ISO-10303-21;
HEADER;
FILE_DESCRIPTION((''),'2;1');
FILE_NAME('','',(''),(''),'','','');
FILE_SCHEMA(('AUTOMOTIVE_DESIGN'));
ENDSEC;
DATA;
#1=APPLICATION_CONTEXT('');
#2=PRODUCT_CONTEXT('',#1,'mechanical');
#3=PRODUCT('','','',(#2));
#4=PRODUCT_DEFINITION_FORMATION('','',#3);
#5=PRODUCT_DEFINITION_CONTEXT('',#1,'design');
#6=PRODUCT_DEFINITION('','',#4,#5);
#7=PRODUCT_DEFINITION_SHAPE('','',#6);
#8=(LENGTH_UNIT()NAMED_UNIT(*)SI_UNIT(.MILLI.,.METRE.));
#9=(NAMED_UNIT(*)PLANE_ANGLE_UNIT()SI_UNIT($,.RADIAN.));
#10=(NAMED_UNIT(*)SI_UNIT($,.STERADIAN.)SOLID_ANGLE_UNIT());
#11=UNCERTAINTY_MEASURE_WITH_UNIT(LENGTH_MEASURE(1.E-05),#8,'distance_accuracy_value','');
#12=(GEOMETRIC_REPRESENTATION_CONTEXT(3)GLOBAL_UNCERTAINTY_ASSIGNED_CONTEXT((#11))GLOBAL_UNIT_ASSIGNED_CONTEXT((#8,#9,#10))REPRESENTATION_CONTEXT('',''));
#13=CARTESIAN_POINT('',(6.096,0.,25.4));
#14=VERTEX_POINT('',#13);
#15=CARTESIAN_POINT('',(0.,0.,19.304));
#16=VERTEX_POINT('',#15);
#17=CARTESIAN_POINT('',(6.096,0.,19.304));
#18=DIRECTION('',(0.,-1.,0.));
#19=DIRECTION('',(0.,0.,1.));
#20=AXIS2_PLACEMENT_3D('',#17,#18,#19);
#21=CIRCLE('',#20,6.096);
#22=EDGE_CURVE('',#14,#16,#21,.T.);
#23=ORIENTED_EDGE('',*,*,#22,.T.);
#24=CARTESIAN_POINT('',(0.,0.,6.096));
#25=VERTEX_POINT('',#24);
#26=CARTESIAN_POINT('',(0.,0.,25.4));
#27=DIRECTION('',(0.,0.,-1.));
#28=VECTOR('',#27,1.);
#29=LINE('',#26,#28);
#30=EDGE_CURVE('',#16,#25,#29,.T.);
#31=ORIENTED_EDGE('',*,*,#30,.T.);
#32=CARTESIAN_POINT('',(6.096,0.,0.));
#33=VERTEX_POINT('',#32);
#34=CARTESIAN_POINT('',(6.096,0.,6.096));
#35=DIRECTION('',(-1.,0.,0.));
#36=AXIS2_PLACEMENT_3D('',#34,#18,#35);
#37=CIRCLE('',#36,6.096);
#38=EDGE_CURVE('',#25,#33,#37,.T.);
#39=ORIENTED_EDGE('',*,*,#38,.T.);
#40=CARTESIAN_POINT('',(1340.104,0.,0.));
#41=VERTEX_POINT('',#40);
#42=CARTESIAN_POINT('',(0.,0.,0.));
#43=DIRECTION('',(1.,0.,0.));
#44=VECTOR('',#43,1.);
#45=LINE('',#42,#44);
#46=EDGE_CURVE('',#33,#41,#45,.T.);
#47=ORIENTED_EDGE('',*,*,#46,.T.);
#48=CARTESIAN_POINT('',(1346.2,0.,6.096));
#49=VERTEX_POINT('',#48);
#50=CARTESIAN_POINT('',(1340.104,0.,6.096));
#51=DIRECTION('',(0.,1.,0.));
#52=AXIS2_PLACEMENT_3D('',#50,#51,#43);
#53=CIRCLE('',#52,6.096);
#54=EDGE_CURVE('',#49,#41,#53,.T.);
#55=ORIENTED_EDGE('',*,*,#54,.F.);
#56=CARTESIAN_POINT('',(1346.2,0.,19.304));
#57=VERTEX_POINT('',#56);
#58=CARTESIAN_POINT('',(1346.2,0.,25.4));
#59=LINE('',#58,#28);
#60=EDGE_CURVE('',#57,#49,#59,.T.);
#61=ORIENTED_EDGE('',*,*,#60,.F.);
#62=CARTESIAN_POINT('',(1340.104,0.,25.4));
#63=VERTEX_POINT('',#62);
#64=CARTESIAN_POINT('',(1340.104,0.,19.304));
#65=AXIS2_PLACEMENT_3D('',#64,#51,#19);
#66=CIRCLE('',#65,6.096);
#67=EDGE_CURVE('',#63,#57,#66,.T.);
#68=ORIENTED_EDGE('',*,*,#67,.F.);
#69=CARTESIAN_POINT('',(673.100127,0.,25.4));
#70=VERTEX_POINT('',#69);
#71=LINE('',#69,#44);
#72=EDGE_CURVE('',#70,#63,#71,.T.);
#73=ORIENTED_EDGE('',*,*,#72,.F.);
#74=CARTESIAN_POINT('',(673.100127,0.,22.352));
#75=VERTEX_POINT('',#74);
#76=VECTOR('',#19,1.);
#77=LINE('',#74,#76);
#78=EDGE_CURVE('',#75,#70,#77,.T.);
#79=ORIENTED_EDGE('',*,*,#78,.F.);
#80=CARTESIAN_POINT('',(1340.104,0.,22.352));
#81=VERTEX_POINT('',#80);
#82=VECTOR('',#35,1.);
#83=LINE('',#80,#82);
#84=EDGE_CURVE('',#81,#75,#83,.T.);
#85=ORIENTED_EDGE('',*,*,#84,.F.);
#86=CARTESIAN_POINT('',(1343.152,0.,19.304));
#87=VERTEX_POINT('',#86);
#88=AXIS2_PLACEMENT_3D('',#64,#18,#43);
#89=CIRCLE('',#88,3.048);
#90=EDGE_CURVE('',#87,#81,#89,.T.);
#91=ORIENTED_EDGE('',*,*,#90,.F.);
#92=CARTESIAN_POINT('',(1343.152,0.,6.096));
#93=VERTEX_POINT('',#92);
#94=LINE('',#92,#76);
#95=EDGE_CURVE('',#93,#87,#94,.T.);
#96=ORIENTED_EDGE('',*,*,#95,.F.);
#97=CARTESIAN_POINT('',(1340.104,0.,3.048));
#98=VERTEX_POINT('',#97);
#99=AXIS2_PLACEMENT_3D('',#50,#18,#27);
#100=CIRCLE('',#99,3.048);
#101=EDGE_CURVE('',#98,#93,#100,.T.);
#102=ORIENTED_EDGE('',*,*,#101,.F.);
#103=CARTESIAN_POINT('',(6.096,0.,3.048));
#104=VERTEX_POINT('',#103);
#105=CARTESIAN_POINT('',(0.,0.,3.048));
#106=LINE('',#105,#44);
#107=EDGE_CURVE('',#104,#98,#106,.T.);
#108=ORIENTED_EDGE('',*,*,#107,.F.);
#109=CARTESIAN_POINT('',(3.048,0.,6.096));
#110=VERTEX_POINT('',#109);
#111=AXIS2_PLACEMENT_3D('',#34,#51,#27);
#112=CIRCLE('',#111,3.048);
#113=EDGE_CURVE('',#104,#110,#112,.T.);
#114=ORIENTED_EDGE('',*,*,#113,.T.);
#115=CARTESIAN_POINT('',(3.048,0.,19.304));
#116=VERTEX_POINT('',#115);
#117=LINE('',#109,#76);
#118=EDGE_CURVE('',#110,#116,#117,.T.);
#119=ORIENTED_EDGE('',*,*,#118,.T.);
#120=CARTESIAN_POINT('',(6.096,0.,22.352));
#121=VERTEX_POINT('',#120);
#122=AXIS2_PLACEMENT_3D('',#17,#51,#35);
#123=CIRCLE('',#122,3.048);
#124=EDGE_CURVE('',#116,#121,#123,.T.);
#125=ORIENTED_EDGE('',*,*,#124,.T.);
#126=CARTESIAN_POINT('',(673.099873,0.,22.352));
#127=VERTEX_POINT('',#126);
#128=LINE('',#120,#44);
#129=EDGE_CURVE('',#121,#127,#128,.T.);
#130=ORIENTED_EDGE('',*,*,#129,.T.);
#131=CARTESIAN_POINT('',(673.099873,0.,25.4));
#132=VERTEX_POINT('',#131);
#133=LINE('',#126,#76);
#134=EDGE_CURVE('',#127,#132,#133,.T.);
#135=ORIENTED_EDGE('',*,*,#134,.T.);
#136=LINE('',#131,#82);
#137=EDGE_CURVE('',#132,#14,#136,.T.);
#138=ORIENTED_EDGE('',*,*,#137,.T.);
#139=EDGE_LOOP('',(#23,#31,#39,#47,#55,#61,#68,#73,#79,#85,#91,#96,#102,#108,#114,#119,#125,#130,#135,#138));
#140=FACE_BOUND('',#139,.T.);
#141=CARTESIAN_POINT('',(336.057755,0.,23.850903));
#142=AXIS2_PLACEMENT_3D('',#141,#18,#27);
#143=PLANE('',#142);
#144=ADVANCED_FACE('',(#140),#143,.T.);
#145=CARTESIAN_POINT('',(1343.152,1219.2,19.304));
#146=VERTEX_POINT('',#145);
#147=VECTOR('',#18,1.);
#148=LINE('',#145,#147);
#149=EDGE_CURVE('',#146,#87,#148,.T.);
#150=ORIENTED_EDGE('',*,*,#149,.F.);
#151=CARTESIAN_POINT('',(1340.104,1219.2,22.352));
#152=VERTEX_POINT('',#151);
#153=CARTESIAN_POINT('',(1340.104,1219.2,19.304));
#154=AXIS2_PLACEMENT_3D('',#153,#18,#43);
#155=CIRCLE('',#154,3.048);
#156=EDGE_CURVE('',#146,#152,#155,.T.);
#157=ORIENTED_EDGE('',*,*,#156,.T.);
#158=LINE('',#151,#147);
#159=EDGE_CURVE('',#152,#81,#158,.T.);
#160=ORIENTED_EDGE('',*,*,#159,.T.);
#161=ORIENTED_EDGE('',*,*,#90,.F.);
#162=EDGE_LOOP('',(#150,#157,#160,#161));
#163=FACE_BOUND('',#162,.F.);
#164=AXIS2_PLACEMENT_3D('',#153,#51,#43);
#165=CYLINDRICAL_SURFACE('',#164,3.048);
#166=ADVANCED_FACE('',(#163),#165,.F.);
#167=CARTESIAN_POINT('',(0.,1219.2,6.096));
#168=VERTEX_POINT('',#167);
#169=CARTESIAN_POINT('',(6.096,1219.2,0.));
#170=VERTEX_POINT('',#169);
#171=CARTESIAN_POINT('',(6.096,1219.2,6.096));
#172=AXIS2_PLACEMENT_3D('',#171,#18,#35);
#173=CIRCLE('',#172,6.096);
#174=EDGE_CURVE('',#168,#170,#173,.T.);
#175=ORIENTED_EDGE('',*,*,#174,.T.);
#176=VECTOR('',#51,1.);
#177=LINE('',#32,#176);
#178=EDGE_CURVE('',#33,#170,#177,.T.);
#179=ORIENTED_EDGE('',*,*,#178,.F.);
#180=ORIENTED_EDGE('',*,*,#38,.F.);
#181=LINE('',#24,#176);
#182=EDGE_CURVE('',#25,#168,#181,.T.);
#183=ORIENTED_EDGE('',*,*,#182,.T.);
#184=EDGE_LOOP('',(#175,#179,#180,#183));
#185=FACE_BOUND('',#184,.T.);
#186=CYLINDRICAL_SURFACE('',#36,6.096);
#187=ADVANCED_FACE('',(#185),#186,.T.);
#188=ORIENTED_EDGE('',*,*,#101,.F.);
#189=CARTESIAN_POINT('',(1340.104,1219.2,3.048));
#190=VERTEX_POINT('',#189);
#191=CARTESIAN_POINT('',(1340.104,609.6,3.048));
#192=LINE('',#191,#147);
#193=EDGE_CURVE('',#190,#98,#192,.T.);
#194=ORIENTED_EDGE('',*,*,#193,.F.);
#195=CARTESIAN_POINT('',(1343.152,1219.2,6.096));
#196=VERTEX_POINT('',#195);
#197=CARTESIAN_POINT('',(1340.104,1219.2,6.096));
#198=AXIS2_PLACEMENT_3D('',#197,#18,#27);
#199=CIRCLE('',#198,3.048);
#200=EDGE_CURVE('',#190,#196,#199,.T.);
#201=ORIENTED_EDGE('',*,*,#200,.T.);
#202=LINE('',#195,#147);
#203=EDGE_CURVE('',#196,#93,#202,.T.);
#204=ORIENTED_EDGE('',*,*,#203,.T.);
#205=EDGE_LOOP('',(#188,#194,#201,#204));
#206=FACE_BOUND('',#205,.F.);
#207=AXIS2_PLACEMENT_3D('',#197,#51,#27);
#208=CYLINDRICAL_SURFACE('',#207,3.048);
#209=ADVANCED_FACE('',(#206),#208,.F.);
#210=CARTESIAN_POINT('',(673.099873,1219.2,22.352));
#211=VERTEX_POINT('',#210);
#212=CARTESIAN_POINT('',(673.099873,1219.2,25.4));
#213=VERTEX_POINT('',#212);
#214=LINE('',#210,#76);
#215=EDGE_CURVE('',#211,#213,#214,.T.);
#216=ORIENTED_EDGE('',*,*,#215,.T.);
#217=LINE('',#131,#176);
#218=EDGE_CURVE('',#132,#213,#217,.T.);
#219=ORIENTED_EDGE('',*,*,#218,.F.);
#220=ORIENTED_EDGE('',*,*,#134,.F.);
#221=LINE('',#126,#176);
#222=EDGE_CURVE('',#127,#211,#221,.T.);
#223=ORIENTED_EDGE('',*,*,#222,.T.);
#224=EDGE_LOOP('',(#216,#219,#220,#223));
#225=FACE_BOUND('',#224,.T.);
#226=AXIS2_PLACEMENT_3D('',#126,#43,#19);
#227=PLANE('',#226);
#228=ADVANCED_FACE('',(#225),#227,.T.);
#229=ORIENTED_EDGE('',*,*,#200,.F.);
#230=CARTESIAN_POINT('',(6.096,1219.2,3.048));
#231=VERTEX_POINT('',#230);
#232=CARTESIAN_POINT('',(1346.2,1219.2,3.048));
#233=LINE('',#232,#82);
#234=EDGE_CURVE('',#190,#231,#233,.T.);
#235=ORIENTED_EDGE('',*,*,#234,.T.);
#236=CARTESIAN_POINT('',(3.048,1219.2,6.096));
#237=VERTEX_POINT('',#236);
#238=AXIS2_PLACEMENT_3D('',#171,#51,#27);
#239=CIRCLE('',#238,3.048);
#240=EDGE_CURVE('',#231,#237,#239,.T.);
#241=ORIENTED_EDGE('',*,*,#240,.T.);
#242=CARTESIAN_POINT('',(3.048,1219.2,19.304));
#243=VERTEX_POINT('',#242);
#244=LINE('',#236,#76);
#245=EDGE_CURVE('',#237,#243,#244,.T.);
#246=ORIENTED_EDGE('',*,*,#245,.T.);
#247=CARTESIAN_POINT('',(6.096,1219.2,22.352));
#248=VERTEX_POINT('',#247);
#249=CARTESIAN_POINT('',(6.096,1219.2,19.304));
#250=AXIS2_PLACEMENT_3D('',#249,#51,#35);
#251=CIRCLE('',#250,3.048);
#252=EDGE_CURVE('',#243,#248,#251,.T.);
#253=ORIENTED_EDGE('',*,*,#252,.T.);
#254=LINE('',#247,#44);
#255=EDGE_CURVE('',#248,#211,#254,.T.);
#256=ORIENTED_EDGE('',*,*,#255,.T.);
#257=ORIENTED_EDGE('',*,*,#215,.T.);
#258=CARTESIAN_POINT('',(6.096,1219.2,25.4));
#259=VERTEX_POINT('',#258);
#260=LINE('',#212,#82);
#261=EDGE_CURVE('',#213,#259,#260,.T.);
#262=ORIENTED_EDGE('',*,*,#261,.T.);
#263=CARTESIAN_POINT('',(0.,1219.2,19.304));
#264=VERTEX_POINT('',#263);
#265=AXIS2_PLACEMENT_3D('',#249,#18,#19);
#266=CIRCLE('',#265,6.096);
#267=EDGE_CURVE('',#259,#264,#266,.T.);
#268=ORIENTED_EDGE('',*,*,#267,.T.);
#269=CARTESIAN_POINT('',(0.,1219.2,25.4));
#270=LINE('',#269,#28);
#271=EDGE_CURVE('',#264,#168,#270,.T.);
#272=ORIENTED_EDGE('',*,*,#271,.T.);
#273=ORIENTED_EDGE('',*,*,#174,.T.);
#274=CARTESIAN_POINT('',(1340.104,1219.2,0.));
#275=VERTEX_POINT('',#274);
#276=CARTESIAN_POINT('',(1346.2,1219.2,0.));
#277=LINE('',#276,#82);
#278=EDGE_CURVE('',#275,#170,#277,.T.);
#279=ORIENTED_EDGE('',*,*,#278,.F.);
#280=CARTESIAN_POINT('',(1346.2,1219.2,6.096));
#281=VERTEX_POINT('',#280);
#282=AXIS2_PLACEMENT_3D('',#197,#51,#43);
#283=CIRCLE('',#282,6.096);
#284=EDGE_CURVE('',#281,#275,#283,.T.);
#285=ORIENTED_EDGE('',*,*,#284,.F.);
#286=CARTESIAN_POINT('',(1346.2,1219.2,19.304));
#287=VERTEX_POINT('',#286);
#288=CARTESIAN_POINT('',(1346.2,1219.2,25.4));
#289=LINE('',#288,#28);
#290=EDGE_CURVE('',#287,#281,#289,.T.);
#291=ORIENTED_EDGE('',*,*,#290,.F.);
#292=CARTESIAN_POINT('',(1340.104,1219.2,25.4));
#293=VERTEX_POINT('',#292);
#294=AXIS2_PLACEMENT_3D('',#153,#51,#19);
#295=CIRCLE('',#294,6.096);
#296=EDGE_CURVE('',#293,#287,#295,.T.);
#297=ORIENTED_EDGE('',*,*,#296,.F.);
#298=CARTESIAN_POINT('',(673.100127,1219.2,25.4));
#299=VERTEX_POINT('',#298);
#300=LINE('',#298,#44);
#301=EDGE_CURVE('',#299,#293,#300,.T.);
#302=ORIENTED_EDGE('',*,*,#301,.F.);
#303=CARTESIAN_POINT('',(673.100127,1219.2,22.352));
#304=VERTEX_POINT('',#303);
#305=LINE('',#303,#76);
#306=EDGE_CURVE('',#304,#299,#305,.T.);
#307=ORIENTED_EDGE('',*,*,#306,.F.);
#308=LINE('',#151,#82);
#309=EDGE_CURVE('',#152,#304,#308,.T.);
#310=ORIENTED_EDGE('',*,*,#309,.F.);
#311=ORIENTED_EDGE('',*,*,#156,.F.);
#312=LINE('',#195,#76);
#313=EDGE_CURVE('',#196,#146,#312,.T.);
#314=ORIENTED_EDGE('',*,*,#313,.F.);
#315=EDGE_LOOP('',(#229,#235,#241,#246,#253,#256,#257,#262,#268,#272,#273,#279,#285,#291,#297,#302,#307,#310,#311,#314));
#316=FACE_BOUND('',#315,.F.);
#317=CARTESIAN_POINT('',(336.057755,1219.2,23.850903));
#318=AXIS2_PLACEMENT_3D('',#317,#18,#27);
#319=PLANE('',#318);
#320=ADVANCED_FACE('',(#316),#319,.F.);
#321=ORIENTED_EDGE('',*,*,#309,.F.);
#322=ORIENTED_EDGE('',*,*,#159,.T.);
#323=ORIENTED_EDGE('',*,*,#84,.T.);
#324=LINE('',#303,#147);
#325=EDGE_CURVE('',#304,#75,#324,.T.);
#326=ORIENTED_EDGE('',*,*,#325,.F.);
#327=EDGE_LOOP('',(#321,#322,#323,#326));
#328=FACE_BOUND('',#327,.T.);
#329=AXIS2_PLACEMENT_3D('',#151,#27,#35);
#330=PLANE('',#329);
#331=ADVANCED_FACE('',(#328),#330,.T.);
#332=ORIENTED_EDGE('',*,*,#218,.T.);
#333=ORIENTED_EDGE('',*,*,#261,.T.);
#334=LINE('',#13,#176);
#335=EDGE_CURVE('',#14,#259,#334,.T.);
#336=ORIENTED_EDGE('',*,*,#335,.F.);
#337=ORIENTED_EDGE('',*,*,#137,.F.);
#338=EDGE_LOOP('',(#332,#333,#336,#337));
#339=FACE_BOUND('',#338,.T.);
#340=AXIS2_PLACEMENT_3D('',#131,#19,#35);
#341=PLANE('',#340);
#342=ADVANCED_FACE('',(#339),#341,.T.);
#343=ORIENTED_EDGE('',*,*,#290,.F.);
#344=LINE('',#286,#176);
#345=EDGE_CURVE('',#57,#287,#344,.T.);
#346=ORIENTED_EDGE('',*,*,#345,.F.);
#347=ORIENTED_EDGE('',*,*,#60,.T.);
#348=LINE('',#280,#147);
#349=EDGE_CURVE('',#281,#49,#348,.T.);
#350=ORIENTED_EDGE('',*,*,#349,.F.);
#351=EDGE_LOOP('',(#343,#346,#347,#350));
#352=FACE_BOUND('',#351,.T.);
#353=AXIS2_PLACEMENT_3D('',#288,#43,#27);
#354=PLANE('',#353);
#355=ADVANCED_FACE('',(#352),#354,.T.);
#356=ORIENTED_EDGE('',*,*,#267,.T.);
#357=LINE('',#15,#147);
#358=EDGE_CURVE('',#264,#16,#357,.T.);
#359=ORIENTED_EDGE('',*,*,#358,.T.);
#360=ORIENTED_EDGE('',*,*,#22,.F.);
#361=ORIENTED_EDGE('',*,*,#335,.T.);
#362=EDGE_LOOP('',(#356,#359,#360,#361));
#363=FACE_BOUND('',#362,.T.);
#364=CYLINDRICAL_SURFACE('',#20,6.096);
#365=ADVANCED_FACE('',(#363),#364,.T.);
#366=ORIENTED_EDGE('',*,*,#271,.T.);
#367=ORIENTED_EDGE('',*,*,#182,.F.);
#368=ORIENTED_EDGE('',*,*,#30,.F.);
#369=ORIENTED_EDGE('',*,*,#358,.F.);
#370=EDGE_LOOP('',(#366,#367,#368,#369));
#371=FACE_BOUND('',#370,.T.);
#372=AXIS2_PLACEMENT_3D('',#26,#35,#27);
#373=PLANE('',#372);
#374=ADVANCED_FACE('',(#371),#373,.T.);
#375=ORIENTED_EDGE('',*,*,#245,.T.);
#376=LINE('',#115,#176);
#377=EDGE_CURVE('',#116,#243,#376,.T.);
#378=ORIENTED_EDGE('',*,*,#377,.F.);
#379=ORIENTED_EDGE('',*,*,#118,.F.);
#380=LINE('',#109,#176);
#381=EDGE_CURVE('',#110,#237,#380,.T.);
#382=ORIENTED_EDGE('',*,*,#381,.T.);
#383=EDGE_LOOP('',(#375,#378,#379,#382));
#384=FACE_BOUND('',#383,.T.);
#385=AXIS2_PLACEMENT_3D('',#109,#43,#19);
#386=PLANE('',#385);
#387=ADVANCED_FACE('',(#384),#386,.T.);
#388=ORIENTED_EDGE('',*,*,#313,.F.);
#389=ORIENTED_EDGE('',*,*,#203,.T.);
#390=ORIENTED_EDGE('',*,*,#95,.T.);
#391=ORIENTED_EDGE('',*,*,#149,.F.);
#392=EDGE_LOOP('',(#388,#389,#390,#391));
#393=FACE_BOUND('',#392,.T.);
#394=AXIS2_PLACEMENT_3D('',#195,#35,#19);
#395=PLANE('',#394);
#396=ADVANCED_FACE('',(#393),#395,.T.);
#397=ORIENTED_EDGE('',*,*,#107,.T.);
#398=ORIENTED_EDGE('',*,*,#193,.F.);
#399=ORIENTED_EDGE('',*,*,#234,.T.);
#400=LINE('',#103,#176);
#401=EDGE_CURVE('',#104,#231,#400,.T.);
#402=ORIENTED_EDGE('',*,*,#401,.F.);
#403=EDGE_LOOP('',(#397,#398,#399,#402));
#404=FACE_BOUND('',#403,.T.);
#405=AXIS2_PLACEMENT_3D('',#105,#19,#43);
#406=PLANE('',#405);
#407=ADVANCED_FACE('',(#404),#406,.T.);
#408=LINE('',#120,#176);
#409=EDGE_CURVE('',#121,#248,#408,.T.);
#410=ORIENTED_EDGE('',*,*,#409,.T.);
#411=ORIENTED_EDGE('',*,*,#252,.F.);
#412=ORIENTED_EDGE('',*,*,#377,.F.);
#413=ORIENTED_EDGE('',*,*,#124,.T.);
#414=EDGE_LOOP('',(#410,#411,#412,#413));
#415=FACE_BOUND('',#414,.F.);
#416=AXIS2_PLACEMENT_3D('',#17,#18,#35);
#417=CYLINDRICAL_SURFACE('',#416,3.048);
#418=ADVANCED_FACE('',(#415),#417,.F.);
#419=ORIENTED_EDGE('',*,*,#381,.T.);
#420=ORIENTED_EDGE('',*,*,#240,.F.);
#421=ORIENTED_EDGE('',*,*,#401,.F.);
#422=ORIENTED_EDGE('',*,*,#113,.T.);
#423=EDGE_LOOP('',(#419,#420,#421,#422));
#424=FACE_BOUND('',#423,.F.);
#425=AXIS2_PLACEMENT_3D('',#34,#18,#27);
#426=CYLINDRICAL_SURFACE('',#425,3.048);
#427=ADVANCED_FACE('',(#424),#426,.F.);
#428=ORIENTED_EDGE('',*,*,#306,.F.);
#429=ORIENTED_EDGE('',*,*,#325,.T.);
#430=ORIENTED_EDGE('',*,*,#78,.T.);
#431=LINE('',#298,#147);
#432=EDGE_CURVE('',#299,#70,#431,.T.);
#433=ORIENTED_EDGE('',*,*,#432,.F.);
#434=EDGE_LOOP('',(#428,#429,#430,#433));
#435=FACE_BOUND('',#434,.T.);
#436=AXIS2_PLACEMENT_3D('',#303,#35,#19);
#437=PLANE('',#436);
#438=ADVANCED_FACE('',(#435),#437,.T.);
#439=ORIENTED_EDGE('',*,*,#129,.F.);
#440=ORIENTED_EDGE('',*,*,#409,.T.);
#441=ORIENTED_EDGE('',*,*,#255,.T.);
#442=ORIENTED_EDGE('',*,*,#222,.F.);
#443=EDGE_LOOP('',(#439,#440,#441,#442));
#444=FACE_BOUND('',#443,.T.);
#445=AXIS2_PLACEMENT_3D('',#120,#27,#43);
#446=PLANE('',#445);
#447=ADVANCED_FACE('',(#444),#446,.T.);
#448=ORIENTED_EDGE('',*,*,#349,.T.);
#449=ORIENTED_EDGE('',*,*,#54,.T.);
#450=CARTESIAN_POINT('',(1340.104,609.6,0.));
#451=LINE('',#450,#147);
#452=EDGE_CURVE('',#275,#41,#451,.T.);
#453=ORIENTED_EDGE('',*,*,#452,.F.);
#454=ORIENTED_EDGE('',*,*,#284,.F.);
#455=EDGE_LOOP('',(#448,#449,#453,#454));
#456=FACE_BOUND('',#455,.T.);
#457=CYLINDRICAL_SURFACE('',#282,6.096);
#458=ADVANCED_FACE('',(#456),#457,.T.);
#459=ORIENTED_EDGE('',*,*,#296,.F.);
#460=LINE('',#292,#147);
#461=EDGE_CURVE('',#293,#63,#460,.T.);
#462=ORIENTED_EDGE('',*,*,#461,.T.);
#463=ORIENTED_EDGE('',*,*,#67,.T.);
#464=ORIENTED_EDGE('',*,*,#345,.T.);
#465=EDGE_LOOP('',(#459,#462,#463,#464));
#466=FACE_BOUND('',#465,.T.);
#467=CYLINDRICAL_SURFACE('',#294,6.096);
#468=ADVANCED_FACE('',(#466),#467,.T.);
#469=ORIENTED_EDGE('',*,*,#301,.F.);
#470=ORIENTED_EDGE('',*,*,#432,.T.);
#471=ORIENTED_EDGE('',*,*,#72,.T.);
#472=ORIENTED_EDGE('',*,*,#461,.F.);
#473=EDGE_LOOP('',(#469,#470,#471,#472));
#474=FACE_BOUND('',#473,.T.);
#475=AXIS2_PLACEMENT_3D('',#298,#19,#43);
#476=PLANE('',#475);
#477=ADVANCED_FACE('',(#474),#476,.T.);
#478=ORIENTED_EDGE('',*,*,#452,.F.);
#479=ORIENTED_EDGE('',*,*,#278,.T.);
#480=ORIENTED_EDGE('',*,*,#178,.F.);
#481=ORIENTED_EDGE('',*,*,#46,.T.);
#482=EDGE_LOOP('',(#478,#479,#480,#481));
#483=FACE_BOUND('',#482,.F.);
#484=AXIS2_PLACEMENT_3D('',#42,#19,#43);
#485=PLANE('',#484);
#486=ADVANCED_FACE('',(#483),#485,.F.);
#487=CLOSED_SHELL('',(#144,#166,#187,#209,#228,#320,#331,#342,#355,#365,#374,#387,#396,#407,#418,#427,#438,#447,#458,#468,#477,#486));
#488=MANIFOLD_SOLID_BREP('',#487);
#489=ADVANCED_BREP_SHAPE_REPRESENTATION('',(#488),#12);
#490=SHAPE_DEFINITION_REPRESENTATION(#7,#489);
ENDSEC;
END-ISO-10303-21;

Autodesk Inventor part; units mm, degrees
ref_plane "YZ Plane" through (0, 0, 0) normal (1, 0, 0) x (0, 1, 0)
ref_plane "XZ Plane" through (0, 0, 0) normal (0, 1, 0) x (-1, 0, 0)
ref_plane "XY Plane" through (0, 0, 0) normal (0, 0, 1) x (1, 0, 0)
sketch "Sketch1" plane through (0, 0, 0) normal (0, 0, 1) x (1, 0, 0)
  line L0 (0, 0) -> (1346.2, 0)
  line L1 (1346.2, 0) -> (1346.2, 1219.2)
  line L2 (1346.2, 1219.2) -> (0, 1219.2)
  line L3 (0, 1219.2) -> (0, 0)
  dimension "d0" = 1346.2
  dimension "d1" = 1219.2
extrude "Plate1" add sketch "Sketch1" along normal blind 3.048
sketch "Sketch2" plane through (1343.152, 1219.2, 0) normal (1, 0, 0) x (0, 1, 0)
  line L0 (-1219.2, 0) -> (0, 0)
  line L1 (0, 0) -> (0, 25.4)
  line L2 (0, 25.4) -> (-1219.2, 25.4)
  line L3 (-1219.2, 25.4) -> (-1219.2, 0)
edge flange "Flange1" height 25.4 angle 90 thickness 3.048 bend radius 3.048 thickness toward (1, 0, 0) relief tear relief width 3.048 relief depth 1.524 corner gap 3.048 corner form 0 edges at (1346.2, 609.6, 3.048) (0, 609.6, 3.048) wall of the first edge with corners at (1343.152, 0, 0) (1343.152, 1219.2, 0) (1343.152, 1219.2, 25.4) (1343.152, 0, 25.4)
bend "Bend1"
corner "Corner1"
sketch "Sketch3" plane through (0, 0, 22.352) normal (0, 0, 1) x (1, 0, 0)
  line L0 (0, 1219.2) -> (0, 0)
  line L1 (0, 0) -> (673.099873, 0)
  line L2 (673.099873, 0) -> (673.099873, 1219.2)
  line L3 (673.099873, 1219.2) -> (0, 1219.2)
edge flange "Flange2" height 673.099873 angle 90 thickness 3.048 bend radius 3.048 thickness toward (0, 0, 1) relief tear relief width 3.048 relief depth 1.524 corner gap 3.048 corner form 0 edges at (3.048, 609.6, 25.4) (1343.152, 609.6, 25.4) wall of the first edge with corners at (0, 1219.2, 22.352) (0, 0, 22.352) (673.099873, 0, 22.352) (673.099873, 1219.2, 22.352)
bend "Bend2"
corner "Corner2"
equation "\"d3\" = BendReliefWidth"
equation "\"d4\" = BendReliefDepth"
equation "\"d5\" = MinimumRemnant"
equation "\"d6\" = BendRadius"
equation "\"d9\" = BendRadius"
equation "\"d10\" = CornerReliefSize"
equation "\"d11\" = GapSize"
equation "\"d12\" = JacobiRadiusSize"
equation "\"d13\" = BendReliefWidth"
equation "\"d14\" = BendReliefDepth"
equation "\"d15\" = MinimumRemnant"
equation "\"d16\" = BendRadius"
equation "\"d19\" = BendRadius"
equation "\"d20\" = CornerReliefSize"
equation "\"d21\" = GapSize"
equation "\"d22\" = JacobiRadiusSize"
equation "\"BendRadius\" = Thickness"
equation "\"BendReliefWidth\" = Thickness"
equation "\"BendReliefDepth\" = 0.5 * Thickness"
equation "\"CornerReliefSize\" = 4 * Thickness"
equation "\"MinimumRemnant\" = 2 * Thickness"
equation "\"TransitionRadius\" = BendRadius"
equation "\"JacobiRadiusSize\" = BendRadius"
equation "\"GapSize\" = Thickness"
equation "\"d2\" = BendRadius"
equation "\"Thickness\" = 3.048"
properties part number "top" material "Polycarbonate, Clear"
